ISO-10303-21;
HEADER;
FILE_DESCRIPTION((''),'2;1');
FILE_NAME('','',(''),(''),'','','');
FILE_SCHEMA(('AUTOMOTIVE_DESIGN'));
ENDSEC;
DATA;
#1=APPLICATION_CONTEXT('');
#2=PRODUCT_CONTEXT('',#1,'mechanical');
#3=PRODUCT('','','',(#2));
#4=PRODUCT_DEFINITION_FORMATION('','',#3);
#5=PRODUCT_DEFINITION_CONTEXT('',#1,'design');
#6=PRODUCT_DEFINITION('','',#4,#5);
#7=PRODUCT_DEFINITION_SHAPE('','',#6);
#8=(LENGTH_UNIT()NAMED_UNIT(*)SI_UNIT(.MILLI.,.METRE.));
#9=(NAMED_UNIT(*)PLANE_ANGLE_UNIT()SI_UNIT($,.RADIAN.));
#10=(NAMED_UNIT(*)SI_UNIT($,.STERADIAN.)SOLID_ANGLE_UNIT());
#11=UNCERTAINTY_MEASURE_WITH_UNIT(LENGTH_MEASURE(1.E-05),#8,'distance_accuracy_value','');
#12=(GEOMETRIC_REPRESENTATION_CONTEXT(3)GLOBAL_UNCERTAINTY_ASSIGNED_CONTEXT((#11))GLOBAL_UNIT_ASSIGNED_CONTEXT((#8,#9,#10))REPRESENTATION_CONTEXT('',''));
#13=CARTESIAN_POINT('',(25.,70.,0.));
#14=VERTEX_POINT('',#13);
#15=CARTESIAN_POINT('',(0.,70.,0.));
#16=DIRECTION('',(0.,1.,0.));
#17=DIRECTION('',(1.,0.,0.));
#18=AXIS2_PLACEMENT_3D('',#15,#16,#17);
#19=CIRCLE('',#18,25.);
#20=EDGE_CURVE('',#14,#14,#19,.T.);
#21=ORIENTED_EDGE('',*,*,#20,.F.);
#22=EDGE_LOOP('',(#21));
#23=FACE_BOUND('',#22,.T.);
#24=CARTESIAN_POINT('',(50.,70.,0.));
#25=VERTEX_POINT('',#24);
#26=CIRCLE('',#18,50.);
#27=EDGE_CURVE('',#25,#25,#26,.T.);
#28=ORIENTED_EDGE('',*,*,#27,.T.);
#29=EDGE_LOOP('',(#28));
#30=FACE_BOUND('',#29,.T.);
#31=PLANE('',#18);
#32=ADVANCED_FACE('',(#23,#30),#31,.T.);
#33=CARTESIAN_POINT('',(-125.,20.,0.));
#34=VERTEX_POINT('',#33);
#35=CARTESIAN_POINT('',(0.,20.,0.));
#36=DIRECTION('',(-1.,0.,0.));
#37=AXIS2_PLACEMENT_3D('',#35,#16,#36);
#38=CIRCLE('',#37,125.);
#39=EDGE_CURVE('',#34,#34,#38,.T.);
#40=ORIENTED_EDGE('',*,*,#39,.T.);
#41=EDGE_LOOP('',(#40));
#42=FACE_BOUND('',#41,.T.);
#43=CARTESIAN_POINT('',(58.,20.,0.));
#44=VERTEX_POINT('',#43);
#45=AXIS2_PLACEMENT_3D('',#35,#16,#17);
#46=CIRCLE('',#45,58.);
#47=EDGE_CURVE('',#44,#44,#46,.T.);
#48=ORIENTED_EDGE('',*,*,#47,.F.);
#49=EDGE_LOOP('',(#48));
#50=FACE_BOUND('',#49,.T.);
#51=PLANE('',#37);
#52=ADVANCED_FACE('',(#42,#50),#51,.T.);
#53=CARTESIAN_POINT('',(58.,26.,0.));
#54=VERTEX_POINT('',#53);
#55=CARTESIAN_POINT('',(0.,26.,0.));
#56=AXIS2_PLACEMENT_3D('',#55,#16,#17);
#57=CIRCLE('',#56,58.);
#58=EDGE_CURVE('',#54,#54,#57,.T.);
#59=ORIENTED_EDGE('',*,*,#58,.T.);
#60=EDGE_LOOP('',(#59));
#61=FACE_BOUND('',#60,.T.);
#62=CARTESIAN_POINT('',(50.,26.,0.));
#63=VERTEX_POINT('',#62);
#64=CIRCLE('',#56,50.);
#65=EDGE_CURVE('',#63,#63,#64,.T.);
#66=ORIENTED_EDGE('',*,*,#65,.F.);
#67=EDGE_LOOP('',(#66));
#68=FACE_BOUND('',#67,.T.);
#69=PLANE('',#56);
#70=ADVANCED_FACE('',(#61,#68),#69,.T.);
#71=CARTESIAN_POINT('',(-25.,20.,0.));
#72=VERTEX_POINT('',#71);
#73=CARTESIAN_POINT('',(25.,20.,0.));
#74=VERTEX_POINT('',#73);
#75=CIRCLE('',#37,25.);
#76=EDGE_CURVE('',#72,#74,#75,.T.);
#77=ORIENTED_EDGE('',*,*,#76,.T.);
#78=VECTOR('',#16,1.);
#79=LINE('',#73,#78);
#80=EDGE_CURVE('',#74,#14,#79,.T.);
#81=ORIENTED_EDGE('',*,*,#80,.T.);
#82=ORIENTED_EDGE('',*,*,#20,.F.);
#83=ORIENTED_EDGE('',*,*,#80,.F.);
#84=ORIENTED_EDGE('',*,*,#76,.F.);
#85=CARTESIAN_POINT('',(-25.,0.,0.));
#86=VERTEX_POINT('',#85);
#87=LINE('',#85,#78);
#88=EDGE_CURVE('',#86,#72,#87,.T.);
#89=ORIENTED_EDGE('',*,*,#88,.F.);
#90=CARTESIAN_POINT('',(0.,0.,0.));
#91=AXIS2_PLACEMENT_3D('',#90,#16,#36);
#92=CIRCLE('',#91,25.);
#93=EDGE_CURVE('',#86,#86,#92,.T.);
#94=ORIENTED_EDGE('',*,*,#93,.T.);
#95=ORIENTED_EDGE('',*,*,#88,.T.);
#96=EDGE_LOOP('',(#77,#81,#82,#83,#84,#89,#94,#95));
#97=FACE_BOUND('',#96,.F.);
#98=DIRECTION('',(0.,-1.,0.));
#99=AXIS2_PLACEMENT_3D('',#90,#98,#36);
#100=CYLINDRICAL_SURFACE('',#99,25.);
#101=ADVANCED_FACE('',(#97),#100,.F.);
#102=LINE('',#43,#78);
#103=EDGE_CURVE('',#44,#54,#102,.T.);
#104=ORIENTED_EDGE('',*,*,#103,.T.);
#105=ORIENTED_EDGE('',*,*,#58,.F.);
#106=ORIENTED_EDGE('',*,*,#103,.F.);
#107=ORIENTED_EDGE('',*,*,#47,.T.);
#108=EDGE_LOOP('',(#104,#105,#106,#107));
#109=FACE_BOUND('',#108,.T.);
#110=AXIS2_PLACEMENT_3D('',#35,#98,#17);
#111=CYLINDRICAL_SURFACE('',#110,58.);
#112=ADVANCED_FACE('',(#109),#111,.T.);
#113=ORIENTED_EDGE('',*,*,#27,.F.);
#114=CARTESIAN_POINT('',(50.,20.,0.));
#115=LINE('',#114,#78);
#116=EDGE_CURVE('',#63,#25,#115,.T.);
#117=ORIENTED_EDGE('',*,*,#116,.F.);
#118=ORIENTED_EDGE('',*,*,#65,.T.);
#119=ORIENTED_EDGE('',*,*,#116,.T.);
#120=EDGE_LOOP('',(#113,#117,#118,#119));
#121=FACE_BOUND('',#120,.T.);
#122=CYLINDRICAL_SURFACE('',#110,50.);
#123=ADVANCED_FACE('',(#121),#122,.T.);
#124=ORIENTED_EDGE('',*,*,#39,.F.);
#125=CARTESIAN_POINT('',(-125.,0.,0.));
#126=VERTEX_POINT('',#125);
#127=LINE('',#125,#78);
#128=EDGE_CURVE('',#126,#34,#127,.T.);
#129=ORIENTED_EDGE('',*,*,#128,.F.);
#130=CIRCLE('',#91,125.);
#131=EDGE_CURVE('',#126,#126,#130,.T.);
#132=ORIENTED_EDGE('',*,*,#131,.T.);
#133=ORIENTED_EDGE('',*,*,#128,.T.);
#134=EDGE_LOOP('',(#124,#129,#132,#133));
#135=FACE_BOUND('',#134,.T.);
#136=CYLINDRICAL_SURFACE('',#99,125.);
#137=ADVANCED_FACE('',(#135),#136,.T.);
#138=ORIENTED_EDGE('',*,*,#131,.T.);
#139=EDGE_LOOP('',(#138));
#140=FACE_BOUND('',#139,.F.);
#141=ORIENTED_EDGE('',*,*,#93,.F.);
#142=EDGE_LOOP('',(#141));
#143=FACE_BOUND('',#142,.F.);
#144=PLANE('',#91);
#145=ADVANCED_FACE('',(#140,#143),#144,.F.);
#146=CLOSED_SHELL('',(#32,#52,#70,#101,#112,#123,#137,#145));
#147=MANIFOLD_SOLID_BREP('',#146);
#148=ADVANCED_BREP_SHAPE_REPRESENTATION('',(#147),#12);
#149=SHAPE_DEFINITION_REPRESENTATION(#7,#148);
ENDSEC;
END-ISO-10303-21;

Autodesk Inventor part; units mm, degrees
ref_plane "YZ Plane" through (0, 0, 0) normal (1, 0, 0) x (0, 1, 0)
ref_plane "XZ Plane" through (0, 0, 0) normal (0, 1, 0) x (-1, 0, 0)
ref_plane "XY Plane" through (0, 0, 0) normal (0, 0, 1) x (1, 0, 0)
sketch "Sketch1" plane through (0, 0, 0) normal (0, 1, 0) x (-1, 0, 0)
  circle A0 centre (0, 0) radius 125
  circle A1 centre (0, 0) radius 25
  dimension "d0" = 250
  dimension "d3" = 50
extrude "Extrusion1" add sketch "Sketch1" along normal blind 20
sketch "Sketch2" plane through (0, 20, 0) normal (0, 1, 0) x (1, 0, 0)
  circle A0 centre (0, 0) radius 25 construction
  circle A1 centre (0, 0) radius 25
  circle A2 centre (0, 0) radius 50
  dimension "d10" = 100
extrude "Extrusion2" add sketch "Sketch2" along normal blind 50
sketch "Sketch3" plane through (0, 20, 0) normal (0, 1, 0) x (1, 0, 0)
  circle A0 centre (0, 0) radius 50 construction
  circle A1 centre (0, 0) radius 125 construction
  circle A2 centre (0, 0) radius 58
  circle A3 centre (0, 0) radius 50 construction
  circle A4 centre (0, 0) radius 50
  dimension "d6" = 8
  dimension "d7" = 116
extrude "Extrusion3" add sketch "Sketch3" along normal blind 6
properties part number "ShaibaNaPatron"
